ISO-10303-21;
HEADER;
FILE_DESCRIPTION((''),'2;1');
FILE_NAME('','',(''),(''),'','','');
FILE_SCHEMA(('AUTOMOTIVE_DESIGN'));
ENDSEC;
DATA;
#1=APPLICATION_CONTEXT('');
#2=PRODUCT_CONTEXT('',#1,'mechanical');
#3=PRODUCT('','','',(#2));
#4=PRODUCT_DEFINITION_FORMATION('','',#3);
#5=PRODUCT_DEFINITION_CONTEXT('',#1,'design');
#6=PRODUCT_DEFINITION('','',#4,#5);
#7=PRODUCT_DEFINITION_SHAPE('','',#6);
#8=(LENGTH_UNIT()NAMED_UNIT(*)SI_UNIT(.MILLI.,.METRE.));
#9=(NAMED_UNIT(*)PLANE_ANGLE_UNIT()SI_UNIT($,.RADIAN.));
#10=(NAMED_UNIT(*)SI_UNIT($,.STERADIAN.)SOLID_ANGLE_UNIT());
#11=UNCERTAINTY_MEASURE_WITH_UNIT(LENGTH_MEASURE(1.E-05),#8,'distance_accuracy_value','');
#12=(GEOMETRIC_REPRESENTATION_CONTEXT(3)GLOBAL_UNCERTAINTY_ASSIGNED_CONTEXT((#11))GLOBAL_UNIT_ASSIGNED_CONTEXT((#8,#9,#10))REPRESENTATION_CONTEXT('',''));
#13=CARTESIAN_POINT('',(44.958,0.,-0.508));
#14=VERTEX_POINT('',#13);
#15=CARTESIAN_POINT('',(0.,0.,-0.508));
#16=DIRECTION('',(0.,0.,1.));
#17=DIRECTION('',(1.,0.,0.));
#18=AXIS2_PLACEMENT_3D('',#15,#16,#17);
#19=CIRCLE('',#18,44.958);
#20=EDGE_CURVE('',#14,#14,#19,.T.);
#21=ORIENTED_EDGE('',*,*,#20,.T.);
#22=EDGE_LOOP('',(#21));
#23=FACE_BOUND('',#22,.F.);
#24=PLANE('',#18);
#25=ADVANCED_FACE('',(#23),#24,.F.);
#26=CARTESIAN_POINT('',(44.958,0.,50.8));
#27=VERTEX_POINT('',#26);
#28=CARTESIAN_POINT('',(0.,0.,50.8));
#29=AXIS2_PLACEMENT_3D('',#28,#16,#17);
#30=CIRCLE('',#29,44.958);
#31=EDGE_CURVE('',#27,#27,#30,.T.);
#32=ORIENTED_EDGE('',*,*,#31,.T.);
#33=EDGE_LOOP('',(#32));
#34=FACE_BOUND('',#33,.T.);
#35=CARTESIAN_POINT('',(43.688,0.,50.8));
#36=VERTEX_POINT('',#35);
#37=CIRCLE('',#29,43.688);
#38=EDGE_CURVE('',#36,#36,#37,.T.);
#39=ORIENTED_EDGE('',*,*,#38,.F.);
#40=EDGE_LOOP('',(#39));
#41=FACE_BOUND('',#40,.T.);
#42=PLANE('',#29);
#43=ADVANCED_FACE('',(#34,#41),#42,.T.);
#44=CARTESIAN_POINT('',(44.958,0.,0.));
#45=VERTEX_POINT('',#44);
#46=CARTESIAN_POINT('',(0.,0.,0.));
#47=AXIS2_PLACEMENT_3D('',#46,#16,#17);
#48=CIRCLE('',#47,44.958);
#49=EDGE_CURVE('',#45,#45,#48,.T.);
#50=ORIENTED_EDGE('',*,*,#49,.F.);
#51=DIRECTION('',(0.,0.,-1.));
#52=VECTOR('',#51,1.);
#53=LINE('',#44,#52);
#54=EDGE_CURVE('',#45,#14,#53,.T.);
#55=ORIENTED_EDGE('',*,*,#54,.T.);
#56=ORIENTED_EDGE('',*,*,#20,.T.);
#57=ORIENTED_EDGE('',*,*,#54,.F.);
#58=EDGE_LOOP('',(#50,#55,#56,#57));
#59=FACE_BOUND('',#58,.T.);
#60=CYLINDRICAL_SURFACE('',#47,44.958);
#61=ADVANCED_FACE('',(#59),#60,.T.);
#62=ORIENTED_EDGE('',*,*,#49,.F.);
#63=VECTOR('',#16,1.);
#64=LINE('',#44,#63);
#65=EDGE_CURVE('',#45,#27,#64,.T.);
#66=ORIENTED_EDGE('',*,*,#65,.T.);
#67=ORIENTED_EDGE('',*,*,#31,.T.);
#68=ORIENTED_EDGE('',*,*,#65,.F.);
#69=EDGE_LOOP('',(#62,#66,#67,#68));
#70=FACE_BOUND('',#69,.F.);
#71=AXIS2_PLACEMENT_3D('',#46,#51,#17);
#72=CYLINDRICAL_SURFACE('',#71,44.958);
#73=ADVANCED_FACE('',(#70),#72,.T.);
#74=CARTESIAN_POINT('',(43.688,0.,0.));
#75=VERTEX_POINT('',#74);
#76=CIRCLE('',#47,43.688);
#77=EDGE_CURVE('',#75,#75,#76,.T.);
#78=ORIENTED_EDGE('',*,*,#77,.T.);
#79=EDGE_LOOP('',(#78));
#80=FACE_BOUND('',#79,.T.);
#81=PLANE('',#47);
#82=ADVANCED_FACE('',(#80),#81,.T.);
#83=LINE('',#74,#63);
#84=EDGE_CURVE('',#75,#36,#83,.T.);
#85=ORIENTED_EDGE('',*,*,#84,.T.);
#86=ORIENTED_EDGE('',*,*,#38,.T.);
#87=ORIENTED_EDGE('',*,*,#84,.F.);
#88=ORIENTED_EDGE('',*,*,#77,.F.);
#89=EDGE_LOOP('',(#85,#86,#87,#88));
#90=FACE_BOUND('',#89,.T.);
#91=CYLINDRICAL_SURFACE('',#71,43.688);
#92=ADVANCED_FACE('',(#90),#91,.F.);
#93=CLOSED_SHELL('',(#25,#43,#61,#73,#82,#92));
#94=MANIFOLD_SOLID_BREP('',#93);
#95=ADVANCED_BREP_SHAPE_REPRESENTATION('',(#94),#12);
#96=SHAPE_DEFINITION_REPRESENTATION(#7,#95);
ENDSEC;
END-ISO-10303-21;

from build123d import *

# Parameters (mm, degrees)
F2_R     = 44.958
F3_DEPTH = 0.508
F4_R     = 44.958
F4_R_2   = 43.688
F5_DEPTH = 50.8


# Not quite as in the source:
# - the program builds the solid bodies; features that only make, move or delete a surface that nothing else refers to are left out


with BuildPart() as f3:
    # F2 (on Top) → F3 (new body)
    with BuildSketch(Plane.XY):
        Circle(F2_R)
    extrude(amount=-F3_DEPTH)

    # F4 (on Top) → F5 (join)
    with BuildSketch(Plane.XY):
        Circle(F4_R)
        Circle(F4_R_2, mode=Mode.SUBTRACT)
    extrude(amount=F5_DEPTH)


solid = f3.part
